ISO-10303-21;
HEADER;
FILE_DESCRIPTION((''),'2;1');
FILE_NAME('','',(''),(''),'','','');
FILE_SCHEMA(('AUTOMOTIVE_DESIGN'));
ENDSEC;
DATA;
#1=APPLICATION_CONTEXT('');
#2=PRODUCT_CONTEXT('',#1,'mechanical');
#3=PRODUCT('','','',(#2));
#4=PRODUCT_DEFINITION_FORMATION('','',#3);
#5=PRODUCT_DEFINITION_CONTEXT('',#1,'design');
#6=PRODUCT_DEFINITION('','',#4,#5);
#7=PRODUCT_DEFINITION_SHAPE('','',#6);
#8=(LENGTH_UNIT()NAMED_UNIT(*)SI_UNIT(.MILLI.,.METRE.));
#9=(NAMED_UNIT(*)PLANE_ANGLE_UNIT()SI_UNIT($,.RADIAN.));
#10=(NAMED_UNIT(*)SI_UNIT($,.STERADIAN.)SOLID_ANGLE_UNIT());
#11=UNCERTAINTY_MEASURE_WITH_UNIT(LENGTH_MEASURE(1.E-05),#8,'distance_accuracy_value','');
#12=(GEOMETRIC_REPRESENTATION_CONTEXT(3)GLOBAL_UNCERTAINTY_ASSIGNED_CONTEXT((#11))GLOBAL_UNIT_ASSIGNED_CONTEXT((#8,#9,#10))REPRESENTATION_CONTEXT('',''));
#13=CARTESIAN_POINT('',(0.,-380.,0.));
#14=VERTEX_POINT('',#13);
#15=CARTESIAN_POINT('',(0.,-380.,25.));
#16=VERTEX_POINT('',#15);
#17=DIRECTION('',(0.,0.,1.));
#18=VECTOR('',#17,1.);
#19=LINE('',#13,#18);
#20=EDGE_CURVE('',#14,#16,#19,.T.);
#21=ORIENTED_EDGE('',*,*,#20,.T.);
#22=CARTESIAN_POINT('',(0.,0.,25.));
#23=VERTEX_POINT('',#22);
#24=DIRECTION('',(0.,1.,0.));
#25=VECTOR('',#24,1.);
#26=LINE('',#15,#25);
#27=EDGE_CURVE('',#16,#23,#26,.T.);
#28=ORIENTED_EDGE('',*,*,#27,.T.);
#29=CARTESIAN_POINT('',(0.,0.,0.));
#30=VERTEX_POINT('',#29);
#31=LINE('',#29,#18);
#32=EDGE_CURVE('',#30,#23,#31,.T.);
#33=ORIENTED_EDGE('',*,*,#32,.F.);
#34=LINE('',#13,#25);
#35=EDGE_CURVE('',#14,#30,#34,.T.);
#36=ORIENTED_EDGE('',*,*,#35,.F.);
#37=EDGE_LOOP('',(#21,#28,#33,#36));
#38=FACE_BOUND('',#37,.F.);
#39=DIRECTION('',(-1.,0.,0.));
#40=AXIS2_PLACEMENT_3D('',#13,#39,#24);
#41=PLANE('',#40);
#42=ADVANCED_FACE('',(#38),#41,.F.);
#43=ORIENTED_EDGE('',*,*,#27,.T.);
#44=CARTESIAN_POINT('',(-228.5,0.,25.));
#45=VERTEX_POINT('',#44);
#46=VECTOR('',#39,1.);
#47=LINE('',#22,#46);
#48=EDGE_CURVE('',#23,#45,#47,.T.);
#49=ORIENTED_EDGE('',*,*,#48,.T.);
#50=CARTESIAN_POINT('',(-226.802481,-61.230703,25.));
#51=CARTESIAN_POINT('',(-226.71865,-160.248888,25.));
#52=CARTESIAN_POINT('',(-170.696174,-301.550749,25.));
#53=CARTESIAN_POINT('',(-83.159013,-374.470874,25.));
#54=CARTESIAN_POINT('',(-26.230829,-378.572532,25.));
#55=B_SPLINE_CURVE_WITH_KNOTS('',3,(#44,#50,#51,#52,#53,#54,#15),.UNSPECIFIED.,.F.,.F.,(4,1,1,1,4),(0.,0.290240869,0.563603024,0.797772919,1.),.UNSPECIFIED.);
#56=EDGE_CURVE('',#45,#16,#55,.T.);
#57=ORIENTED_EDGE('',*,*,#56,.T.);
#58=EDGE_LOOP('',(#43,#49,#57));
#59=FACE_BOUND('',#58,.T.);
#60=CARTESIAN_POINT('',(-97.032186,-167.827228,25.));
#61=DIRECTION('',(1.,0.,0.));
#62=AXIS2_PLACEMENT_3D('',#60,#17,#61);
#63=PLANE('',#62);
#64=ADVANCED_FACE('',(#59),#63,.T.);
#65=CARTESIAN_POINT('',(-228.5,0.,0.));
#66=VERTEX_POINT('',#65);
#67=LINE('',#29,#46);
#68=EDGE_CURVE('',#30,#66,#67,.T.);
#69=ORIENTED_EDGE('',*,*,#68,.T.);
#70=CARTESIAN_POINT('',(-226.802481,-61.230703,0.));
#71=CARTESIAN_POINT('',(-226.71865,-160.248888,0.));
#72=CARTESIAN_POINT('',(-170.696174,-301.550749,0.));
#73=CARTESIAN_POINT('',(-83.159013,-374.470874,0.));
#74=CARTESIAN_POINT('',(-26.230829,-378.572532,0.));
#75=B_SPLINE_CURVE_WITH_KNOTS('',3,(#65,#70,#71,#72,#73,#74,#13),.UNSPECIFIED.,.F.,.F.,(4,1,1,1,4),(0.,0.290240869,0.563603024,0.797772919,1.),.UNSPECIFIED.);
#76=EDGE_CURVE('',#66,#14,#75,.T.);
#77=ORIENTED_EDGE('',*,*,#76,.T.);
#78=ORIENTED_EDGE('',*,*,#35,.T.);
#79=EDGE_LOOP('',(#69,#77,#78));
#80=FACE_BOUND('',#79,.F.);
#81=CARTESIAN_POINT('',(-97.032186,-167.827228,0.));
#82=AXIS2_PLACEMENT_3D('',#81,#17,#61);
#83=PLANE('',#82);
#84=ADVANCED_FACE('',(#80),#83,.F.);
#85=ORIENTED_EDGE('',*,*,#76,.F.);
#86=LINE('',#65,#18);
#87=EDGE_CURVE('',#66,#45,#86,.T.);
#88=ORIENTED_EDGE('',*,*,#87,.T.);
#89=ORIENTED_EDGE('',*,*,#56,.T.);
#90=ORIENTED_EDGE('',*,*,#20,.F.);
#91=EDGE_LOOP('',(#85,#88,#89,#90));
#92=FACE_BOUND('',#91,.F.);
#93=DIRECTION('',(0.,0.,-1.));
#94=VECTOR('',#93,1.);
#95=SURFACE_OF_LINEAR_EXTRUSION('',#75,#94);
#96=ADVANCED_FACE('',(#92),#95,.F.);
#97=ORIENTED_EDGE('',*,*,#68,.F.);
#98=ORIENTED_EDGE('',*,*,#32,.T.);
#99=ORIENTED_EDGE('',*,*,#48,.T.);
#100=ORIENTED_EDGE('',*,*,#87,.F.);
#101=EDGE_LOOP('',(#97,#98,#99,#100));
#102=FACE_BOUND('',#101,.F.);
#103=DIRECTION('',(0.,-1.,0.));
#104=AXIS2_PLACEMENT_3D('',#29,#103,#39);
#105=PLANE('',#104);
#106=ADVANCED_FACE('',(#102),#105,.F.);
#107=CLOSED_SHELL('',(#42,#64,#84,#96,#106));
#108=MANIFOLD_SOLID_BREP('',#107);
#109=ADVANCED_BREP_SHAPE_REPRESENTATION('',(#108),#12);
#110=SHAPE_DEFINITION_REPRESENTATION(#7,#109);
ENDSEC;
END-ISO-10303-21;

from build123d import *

# Parameters (mm, degrees)
F1_DEPTH = 25


# Not quite as in the source:
# - a feature names something its author has since deleted; it is built from what else it names


with BuildPart() as f1:
    # F0 (on Top) → F1 (new body)
    with BuildSketch(Plane.XY):
        with BuildLine():
            Line((0, 0), (-228.5, 0))
            add(Edge.make_bspline(
                [(-228.5, 0), (-226.8024807913, -61.2307032026), (-226.7186497639, -160.2488878314), (-170.6961741077, -301.5507488185), (-83.1590128355, -374.4708739919), (-26.2308287082, -378.5725320699), (0, -380)],
                knots=[0, 0, 0, 0, 0.2902408691, 0.5636030239, 0.7977729188, 1, 1, 1, 1], degree=3))
            Line((0, -380), (0, 0))
        make_face()
    extrude(amount=F1_DEPTH)


solid = f1.part
